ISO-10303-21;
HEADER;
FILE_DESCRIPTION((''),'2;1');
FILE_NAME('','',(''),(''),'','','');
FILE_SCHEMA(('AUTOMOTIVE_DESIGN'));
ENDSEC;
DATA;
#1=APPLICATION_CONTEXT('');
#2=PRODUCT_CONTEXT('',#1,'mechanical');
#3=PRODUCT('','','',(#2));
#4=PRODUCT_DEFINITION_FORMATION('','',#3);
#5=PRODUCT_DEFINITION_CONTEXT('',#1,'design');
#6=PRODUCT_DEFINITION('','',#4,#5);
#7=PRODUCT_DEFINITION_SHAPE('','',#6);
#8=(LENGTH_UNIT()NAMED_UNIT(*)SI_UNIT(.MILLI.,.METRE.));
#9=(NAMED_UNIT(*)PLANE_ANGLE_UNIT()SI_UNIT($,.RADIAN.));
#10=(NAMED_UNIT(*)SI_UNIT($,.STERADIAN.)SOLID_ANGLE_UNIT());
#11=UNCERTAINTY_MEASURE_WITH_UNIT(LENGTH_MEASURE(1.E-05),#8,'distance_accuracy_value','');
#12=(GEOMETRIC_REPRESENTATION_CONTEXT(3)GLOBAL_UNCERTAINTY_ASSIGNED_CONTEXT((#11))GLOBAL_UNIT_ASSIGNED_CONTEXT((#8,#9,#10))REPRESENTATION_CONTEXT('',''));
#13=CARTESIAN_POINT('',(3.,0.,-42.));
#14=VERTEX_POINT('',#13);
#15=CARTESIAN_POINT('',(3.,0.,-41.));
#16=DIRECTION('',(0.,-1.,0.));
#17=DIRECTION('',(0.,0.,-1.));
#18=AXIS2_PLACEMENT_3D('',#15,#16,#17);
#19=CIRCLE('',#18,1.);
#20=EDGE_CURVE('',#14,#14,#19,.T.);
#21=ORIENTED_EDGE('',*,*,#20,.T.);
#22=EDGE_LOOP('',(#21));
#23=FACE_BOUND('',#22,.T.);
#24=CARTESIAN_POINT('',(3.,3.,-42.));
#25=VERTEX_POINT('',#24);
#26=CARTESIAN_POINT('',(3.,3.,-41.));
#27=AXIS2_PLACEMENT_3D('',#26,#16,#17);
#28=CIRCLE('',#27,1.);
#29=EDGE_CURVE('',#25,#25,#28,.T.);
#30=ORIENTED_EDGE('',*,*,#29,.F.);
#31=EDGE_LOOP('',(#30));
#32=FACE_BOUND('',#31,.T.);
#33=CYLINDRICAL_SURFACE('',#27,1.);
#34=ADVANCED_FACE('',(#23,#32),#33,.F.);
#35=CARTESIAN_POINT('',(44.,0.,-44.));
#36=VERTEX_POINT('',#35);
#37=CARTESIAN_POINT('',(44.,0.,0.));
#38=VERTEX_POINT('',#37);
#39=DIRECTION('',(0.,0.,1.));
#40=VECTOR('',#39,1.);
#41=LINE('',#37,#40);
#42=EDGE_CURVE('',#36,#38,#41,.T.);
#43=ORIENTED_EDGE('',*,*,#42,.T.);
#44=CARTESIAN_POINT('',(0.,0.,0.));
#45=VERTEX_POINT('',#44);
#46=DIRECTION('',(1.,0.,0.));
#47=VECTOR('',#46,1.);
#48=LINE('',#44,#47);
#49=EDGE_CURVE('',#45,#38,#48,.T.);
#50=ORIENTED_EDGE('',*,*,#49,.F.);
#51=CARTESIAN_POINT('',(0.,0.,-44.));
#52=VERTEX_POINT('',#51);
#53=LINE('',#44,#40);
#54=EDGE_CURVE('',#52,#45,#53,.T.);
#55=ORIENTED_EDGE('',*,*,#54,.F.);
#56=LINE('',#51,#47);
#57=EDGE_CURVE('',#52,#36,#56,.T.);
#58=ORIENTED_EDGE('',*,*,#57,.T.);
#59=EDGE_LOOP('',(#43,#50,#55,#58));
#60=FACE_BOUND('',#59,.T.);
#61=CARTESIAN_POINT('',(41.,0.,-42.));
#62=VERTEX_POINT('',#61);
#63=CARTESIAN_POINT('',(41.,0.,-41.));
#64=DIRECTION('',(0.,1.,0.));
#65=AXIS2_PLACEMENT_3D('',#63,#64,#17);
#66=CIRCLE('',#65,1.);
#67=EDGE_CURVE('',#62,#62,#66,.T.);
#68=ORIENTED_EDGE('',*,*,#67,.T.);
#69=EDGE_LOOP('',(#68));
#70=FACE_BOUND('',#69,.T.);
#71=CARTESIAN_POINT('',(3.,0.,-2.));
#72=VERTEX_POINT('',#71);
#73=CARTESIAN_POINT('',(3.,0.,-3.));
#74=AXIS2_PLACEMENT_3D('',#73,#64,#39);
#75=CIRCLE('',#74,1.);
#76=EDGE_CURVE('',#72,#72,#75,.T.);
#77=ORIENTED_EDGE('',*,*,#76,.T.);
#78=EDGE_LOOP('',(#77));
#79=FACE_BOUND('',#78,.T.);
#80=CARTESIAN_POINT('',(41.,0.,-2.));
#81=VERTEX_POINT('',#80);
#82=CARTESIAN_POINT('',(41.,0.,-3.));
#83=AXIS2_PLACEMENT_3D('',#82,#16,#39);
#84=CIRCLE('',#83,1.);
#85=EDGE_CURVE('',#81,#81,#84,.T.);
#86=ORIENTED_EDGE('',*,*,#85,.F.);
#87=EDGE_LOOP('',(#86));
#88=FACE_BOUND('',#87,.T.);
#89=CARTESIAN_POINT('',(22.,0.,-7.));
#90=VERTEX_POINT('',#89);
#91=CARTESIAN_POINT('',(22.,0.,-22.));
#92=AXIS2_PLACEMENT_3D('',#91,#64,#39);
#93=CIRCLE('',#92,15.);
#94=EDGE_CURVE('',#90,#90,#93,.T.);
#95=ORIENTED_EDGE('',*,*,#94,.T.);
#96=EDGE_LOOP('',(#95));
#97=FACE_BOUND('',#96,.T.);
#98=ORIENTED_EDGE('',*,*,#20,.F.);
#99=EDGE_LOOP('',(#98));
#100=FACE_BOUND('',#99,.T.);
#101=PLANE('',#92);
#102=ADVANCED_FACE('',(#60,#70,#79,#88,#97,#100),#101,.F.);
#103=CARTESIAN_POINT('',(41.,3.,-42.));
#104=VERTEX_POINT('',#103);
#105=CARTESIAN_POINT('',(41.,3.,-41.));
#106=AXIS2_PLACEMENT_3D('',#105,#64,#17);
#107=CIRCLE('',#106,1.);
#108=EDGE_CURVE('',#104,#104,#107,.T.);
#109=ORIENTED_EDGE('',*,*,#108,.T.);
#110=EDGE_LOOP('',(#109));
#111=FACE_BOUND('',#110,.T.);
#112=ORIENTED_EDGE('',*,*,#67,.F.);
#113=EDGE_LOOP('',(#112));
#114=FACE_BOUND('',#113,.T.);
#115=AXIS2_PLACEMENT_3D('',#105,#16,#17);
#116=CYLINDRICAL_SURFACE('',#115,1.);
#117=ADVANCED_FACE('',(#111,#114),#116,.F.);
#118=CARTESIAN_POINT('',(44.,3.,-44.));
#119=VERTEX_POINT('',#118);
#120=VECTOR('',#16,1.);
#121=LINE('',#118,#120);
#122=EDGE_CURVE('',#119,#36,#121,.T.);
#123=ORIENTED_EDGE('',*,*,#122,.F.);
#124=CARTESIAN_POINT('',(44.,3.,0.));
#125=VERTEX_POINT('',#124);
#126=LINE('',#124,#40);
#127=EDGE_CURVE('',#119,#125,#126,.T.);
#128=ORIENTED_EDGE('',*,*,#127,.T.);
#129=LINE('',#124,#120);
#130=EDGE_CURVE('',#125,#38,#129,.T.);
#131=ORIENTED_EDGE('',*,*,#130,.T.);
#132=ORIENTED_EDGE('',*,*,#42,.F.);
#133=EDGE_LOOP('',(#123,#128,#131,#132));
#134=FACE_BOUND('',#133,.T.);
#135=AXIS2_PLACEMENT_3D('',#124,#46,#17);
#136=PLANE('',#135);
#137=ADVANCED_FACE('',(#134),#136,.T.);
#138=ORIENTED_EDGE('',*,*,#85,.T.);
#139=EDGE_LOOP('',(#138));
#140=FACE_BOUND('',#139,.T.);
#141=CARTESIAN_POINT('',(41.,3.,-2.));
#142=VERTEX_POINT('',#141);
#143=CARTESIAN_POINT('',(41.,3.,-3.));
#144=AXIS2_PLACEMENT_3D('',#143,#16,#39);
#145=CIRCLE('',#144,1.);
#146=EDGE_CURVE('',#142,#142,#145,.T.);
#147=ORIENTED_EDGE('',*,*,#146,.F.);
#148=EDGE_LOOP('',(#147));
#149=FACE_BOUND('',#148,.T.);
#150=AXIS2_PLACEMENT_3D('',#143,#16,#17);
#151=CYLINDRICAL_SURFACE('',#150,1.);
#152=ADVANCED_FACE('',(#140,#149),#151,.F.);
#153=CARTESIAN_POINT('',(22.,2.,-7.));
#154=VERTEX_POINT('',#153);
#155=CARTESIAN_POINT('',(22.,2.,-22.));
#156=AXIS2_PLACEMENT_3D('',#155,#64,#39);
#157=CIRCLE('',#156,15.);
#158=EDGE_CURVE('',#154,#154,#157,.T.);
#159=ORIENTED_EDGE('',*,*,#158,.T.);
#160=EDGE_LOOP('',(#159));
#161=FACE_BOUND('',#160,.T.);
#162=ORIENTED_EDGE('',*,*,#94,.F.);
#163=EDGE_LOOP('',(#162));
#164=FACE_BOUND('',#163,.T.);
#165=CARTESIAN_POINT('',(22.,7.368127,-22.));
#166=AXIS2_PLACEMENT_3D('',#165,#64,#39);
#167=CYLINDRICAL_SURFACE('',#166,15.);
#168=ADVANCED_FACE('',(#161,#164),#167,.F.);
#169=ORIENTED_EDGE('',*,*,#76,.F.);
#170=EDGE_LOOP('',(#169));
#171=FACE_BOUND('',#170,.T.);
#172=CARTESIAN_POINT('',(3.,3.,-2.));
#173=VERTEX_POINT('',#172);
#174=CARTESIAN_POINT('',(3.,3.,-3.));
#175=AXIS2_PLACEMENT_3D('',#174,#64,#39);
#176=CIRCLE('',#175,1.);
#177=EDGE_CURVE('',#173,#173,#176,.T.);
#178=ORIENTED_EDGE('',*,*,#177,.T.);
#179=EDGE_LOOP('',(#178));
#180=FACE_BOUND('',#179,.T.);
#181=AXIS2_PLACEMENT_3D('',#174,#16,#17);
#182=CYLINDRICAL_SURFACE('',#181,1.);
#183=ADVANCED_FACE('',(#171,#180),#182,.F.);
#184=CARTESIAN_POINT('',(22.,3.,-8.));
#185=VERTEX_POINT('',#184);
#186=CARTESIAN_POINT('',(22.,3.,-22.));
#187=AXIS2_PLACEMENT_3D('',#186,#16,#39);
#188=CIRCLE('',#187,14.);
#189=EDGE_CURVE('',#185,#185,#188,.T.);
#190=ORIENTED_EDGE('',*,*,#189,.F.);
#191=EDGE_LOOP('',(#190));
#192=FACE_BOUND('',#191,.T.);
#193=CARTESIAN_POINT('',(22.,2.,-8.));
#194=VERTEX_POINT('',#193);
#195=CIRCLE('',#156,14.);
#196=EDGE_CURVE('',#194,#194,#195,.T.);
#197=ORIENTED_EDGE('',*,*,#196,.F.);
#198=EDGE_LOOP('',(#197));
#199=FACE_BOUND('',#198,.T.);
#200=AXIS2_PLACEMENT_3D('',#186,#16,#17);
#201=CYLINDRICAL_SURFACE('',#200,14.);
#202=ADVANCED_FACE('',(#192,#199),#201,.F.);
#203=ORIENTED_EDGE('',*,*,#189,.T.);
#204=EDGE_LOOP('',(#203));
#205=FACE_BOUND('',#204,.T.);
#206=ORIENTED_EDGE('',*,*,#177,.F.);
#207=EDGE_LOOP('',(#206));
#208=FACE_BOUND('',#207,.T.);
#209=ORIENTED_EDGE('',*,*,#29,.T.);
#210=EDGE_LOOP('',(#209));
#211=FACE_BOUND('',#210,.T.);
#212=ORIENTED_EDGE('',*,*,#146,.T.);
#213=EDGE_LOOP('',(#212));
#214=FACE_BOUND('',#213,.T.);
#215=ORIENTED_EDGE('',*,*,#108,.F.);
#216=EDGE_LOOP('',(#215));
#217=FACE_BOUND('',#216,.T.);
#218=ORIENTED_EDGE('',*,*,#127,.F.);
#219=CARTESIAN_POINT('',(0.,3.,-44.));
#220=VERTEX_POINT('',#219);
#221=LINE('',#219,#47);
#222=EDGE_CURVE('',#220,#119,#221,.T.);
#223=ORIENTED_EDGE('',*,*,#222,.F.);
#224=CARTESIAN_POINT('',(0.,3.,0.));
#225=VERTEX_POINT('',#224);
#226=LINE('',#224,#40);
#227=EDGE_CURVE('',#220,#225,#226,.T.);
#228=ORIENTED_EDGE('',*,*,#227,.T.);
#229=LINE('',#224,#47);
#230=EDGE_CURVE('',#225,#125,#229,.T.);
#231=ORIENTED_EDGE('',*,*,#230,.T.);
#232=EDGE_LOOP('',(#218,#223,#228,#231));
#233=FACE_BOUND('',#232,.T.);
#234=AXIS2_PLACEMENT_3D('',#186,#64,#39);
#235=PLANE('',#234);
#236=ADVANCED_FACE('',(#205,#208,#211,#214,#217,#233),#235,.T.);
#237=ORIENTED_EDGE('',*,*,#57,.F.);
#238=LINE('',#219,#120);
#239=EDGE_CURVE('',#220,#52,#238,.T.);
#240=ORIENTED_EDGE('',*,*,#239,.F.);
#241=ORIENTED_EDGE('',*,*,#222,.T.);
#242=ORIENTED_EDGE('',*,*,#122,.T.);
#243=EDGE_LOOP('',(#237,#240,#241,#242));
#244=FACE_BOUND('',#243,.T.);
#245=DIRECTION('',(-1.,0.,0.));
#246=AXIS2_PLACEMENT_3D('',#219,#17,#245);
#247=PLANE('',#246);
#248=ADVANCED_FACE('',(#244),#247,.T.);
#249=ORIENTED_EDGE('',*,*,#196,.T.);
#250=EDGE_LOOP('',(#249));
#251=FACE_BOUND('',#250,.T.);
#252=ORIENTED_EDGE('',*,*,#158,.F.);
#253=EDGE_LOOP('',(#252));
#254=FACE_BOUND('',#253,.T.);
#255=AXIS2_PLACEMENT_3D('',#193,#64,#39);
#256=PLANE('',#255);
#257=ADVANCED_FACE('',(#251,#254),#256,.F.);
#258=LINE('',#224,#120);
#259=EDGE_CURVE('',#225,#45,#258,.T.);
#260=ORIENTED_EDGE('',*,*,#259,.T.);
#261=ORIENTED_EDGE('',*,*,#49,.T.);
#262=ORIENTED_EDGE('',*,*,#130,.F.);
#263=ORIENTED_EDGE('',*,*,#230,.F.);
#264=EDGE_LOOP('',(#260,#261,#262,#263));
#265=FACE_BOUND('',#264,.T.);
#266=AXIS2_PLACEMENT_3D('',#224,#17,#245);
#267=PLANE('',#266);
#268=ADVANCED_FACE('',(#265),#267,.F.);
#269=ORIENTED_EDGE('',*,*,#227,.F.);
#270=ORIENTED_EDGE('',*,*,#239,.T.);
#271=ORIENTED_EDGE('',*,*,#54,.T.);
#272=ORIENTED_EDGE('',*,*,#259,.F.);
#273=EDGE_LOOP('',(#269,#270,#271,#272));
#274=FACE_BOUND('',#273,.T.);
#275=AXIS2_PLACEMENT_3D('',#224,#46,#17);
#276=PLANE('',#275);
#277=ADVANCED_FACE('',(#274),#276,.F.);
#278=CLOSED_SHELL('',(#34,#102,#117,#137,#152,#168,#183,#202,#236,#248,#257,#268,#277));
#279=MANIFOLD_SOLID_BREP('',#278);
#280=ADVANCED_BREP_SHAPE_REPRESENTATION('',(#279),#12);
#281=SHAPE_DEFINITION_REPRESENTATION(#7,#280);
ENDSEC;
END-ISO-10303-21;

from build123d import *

# Parameters (mm, degrees)
SKETCH1_R           = 1
BOSS_EXTRUDE1_DEPTH = 3
SKETCH3_W           = 1
SKETCH3_H           = 2
MIRROR1_OUTLINE_R   = 1
MIRROR1_DEPTH       = 3
MIRROR1_START       = 2
MIRROR1_2_DEPTH     = 1


# Read off the part's stored shape, not the designer's step: Mirror1
with BuildPart() as part:
    # Sketch1 → Boss-Extrude1 (new body)
    with BuildSketch(Plane(origin=(0, 0, 0), x_dir=(1, 0, 0), z_dir=(0, 1, 0))):
        with BuildLine():
            Line((0, 0), (22, 0))
            Line((22, 0), (22, 8))
            ThreePointArc((22, 8), (12.100505063, 12.100505063), (8, 22))
            Line((8, 22), (0, 22))
            Line((0, 22), (0, 0))
        make_face()
        with Locations(Location((3, 3, 0), (0, 0, 270))):
            Circle(SKETCH1_R, mode=Mode.SUBTRACT)
    extrude(amount=BOSS_EXTRUDE1_DEPTH)

    # Sketch3 → Cut-Revolve1 (revolve, cut)
    with BuildSketch(Plane(origin=(22, 0, 0), x_dir=(0, 0, -1), z_dir=(1, 0, 0))):
        with Locations((7.5, 1)):
            Rectangle(SKETCH3_W, SKETCH3_H)
    revolve(axis=Axis((22, 7.36812707, -22), (0, -1, 0)), mode=Mode.SUBTRACT)

    # Mirror1 outline → Mirror1 (add)
    with BuildSketch(Plane(origin=(0, 0, 0), x_dir=(1, 0, 0), z_dir=(0, 1, 0))):
        with BuildLine():
            Line((0, 44), (0, 22))
            Line((0, 22), (7, 22))
            ThreePointArc((7, 22), (32.606601718, 32.606601718), (22, 7))
            Line((22, 7), (22, 0))
            Line((22, 0), (44, 0))
            Line((44, 0), (44, 44))
            Line((44, 44), (0, 44))
        make_face()
        with Locations((41, 3)):
            Circle(MIRROR1_OUTLINE_R, mode=Mode.SUBTRACT)
        with Locations((3, 41)):
            Circle(MIRROR1_OUTLINE_R, mode=Mode.SUBTRACT)
        with Locations((41, 41)):
            Circle(MIRROR1_OUTLINE_R, mode=Mode.SUBTRACT)
    extrude(amount=MIRROR1_DEPTH)

    # Mirror1 2 outline → Mirror1 2 (add)
    with BuildSketch(Plane(origin=(0, 0, 0), x_dir=(1, 0, 0), z_dir=(0, 1, 0)).offset(MIRROR1_START)):
        with BuildLine():
            ThreePointArc((22, 7), (32.606601718, 32.606601718), (7, 22))
            Line((7, 22), (8, 22))
            ThreePointArc((8, 22), (31.899494937, 31.899494937), (22, 8))
            Line((22, 8), (22, 7))
        make_face()
    extrude(amount=MIRROR1_2_DEPTH)


solid = part.part
